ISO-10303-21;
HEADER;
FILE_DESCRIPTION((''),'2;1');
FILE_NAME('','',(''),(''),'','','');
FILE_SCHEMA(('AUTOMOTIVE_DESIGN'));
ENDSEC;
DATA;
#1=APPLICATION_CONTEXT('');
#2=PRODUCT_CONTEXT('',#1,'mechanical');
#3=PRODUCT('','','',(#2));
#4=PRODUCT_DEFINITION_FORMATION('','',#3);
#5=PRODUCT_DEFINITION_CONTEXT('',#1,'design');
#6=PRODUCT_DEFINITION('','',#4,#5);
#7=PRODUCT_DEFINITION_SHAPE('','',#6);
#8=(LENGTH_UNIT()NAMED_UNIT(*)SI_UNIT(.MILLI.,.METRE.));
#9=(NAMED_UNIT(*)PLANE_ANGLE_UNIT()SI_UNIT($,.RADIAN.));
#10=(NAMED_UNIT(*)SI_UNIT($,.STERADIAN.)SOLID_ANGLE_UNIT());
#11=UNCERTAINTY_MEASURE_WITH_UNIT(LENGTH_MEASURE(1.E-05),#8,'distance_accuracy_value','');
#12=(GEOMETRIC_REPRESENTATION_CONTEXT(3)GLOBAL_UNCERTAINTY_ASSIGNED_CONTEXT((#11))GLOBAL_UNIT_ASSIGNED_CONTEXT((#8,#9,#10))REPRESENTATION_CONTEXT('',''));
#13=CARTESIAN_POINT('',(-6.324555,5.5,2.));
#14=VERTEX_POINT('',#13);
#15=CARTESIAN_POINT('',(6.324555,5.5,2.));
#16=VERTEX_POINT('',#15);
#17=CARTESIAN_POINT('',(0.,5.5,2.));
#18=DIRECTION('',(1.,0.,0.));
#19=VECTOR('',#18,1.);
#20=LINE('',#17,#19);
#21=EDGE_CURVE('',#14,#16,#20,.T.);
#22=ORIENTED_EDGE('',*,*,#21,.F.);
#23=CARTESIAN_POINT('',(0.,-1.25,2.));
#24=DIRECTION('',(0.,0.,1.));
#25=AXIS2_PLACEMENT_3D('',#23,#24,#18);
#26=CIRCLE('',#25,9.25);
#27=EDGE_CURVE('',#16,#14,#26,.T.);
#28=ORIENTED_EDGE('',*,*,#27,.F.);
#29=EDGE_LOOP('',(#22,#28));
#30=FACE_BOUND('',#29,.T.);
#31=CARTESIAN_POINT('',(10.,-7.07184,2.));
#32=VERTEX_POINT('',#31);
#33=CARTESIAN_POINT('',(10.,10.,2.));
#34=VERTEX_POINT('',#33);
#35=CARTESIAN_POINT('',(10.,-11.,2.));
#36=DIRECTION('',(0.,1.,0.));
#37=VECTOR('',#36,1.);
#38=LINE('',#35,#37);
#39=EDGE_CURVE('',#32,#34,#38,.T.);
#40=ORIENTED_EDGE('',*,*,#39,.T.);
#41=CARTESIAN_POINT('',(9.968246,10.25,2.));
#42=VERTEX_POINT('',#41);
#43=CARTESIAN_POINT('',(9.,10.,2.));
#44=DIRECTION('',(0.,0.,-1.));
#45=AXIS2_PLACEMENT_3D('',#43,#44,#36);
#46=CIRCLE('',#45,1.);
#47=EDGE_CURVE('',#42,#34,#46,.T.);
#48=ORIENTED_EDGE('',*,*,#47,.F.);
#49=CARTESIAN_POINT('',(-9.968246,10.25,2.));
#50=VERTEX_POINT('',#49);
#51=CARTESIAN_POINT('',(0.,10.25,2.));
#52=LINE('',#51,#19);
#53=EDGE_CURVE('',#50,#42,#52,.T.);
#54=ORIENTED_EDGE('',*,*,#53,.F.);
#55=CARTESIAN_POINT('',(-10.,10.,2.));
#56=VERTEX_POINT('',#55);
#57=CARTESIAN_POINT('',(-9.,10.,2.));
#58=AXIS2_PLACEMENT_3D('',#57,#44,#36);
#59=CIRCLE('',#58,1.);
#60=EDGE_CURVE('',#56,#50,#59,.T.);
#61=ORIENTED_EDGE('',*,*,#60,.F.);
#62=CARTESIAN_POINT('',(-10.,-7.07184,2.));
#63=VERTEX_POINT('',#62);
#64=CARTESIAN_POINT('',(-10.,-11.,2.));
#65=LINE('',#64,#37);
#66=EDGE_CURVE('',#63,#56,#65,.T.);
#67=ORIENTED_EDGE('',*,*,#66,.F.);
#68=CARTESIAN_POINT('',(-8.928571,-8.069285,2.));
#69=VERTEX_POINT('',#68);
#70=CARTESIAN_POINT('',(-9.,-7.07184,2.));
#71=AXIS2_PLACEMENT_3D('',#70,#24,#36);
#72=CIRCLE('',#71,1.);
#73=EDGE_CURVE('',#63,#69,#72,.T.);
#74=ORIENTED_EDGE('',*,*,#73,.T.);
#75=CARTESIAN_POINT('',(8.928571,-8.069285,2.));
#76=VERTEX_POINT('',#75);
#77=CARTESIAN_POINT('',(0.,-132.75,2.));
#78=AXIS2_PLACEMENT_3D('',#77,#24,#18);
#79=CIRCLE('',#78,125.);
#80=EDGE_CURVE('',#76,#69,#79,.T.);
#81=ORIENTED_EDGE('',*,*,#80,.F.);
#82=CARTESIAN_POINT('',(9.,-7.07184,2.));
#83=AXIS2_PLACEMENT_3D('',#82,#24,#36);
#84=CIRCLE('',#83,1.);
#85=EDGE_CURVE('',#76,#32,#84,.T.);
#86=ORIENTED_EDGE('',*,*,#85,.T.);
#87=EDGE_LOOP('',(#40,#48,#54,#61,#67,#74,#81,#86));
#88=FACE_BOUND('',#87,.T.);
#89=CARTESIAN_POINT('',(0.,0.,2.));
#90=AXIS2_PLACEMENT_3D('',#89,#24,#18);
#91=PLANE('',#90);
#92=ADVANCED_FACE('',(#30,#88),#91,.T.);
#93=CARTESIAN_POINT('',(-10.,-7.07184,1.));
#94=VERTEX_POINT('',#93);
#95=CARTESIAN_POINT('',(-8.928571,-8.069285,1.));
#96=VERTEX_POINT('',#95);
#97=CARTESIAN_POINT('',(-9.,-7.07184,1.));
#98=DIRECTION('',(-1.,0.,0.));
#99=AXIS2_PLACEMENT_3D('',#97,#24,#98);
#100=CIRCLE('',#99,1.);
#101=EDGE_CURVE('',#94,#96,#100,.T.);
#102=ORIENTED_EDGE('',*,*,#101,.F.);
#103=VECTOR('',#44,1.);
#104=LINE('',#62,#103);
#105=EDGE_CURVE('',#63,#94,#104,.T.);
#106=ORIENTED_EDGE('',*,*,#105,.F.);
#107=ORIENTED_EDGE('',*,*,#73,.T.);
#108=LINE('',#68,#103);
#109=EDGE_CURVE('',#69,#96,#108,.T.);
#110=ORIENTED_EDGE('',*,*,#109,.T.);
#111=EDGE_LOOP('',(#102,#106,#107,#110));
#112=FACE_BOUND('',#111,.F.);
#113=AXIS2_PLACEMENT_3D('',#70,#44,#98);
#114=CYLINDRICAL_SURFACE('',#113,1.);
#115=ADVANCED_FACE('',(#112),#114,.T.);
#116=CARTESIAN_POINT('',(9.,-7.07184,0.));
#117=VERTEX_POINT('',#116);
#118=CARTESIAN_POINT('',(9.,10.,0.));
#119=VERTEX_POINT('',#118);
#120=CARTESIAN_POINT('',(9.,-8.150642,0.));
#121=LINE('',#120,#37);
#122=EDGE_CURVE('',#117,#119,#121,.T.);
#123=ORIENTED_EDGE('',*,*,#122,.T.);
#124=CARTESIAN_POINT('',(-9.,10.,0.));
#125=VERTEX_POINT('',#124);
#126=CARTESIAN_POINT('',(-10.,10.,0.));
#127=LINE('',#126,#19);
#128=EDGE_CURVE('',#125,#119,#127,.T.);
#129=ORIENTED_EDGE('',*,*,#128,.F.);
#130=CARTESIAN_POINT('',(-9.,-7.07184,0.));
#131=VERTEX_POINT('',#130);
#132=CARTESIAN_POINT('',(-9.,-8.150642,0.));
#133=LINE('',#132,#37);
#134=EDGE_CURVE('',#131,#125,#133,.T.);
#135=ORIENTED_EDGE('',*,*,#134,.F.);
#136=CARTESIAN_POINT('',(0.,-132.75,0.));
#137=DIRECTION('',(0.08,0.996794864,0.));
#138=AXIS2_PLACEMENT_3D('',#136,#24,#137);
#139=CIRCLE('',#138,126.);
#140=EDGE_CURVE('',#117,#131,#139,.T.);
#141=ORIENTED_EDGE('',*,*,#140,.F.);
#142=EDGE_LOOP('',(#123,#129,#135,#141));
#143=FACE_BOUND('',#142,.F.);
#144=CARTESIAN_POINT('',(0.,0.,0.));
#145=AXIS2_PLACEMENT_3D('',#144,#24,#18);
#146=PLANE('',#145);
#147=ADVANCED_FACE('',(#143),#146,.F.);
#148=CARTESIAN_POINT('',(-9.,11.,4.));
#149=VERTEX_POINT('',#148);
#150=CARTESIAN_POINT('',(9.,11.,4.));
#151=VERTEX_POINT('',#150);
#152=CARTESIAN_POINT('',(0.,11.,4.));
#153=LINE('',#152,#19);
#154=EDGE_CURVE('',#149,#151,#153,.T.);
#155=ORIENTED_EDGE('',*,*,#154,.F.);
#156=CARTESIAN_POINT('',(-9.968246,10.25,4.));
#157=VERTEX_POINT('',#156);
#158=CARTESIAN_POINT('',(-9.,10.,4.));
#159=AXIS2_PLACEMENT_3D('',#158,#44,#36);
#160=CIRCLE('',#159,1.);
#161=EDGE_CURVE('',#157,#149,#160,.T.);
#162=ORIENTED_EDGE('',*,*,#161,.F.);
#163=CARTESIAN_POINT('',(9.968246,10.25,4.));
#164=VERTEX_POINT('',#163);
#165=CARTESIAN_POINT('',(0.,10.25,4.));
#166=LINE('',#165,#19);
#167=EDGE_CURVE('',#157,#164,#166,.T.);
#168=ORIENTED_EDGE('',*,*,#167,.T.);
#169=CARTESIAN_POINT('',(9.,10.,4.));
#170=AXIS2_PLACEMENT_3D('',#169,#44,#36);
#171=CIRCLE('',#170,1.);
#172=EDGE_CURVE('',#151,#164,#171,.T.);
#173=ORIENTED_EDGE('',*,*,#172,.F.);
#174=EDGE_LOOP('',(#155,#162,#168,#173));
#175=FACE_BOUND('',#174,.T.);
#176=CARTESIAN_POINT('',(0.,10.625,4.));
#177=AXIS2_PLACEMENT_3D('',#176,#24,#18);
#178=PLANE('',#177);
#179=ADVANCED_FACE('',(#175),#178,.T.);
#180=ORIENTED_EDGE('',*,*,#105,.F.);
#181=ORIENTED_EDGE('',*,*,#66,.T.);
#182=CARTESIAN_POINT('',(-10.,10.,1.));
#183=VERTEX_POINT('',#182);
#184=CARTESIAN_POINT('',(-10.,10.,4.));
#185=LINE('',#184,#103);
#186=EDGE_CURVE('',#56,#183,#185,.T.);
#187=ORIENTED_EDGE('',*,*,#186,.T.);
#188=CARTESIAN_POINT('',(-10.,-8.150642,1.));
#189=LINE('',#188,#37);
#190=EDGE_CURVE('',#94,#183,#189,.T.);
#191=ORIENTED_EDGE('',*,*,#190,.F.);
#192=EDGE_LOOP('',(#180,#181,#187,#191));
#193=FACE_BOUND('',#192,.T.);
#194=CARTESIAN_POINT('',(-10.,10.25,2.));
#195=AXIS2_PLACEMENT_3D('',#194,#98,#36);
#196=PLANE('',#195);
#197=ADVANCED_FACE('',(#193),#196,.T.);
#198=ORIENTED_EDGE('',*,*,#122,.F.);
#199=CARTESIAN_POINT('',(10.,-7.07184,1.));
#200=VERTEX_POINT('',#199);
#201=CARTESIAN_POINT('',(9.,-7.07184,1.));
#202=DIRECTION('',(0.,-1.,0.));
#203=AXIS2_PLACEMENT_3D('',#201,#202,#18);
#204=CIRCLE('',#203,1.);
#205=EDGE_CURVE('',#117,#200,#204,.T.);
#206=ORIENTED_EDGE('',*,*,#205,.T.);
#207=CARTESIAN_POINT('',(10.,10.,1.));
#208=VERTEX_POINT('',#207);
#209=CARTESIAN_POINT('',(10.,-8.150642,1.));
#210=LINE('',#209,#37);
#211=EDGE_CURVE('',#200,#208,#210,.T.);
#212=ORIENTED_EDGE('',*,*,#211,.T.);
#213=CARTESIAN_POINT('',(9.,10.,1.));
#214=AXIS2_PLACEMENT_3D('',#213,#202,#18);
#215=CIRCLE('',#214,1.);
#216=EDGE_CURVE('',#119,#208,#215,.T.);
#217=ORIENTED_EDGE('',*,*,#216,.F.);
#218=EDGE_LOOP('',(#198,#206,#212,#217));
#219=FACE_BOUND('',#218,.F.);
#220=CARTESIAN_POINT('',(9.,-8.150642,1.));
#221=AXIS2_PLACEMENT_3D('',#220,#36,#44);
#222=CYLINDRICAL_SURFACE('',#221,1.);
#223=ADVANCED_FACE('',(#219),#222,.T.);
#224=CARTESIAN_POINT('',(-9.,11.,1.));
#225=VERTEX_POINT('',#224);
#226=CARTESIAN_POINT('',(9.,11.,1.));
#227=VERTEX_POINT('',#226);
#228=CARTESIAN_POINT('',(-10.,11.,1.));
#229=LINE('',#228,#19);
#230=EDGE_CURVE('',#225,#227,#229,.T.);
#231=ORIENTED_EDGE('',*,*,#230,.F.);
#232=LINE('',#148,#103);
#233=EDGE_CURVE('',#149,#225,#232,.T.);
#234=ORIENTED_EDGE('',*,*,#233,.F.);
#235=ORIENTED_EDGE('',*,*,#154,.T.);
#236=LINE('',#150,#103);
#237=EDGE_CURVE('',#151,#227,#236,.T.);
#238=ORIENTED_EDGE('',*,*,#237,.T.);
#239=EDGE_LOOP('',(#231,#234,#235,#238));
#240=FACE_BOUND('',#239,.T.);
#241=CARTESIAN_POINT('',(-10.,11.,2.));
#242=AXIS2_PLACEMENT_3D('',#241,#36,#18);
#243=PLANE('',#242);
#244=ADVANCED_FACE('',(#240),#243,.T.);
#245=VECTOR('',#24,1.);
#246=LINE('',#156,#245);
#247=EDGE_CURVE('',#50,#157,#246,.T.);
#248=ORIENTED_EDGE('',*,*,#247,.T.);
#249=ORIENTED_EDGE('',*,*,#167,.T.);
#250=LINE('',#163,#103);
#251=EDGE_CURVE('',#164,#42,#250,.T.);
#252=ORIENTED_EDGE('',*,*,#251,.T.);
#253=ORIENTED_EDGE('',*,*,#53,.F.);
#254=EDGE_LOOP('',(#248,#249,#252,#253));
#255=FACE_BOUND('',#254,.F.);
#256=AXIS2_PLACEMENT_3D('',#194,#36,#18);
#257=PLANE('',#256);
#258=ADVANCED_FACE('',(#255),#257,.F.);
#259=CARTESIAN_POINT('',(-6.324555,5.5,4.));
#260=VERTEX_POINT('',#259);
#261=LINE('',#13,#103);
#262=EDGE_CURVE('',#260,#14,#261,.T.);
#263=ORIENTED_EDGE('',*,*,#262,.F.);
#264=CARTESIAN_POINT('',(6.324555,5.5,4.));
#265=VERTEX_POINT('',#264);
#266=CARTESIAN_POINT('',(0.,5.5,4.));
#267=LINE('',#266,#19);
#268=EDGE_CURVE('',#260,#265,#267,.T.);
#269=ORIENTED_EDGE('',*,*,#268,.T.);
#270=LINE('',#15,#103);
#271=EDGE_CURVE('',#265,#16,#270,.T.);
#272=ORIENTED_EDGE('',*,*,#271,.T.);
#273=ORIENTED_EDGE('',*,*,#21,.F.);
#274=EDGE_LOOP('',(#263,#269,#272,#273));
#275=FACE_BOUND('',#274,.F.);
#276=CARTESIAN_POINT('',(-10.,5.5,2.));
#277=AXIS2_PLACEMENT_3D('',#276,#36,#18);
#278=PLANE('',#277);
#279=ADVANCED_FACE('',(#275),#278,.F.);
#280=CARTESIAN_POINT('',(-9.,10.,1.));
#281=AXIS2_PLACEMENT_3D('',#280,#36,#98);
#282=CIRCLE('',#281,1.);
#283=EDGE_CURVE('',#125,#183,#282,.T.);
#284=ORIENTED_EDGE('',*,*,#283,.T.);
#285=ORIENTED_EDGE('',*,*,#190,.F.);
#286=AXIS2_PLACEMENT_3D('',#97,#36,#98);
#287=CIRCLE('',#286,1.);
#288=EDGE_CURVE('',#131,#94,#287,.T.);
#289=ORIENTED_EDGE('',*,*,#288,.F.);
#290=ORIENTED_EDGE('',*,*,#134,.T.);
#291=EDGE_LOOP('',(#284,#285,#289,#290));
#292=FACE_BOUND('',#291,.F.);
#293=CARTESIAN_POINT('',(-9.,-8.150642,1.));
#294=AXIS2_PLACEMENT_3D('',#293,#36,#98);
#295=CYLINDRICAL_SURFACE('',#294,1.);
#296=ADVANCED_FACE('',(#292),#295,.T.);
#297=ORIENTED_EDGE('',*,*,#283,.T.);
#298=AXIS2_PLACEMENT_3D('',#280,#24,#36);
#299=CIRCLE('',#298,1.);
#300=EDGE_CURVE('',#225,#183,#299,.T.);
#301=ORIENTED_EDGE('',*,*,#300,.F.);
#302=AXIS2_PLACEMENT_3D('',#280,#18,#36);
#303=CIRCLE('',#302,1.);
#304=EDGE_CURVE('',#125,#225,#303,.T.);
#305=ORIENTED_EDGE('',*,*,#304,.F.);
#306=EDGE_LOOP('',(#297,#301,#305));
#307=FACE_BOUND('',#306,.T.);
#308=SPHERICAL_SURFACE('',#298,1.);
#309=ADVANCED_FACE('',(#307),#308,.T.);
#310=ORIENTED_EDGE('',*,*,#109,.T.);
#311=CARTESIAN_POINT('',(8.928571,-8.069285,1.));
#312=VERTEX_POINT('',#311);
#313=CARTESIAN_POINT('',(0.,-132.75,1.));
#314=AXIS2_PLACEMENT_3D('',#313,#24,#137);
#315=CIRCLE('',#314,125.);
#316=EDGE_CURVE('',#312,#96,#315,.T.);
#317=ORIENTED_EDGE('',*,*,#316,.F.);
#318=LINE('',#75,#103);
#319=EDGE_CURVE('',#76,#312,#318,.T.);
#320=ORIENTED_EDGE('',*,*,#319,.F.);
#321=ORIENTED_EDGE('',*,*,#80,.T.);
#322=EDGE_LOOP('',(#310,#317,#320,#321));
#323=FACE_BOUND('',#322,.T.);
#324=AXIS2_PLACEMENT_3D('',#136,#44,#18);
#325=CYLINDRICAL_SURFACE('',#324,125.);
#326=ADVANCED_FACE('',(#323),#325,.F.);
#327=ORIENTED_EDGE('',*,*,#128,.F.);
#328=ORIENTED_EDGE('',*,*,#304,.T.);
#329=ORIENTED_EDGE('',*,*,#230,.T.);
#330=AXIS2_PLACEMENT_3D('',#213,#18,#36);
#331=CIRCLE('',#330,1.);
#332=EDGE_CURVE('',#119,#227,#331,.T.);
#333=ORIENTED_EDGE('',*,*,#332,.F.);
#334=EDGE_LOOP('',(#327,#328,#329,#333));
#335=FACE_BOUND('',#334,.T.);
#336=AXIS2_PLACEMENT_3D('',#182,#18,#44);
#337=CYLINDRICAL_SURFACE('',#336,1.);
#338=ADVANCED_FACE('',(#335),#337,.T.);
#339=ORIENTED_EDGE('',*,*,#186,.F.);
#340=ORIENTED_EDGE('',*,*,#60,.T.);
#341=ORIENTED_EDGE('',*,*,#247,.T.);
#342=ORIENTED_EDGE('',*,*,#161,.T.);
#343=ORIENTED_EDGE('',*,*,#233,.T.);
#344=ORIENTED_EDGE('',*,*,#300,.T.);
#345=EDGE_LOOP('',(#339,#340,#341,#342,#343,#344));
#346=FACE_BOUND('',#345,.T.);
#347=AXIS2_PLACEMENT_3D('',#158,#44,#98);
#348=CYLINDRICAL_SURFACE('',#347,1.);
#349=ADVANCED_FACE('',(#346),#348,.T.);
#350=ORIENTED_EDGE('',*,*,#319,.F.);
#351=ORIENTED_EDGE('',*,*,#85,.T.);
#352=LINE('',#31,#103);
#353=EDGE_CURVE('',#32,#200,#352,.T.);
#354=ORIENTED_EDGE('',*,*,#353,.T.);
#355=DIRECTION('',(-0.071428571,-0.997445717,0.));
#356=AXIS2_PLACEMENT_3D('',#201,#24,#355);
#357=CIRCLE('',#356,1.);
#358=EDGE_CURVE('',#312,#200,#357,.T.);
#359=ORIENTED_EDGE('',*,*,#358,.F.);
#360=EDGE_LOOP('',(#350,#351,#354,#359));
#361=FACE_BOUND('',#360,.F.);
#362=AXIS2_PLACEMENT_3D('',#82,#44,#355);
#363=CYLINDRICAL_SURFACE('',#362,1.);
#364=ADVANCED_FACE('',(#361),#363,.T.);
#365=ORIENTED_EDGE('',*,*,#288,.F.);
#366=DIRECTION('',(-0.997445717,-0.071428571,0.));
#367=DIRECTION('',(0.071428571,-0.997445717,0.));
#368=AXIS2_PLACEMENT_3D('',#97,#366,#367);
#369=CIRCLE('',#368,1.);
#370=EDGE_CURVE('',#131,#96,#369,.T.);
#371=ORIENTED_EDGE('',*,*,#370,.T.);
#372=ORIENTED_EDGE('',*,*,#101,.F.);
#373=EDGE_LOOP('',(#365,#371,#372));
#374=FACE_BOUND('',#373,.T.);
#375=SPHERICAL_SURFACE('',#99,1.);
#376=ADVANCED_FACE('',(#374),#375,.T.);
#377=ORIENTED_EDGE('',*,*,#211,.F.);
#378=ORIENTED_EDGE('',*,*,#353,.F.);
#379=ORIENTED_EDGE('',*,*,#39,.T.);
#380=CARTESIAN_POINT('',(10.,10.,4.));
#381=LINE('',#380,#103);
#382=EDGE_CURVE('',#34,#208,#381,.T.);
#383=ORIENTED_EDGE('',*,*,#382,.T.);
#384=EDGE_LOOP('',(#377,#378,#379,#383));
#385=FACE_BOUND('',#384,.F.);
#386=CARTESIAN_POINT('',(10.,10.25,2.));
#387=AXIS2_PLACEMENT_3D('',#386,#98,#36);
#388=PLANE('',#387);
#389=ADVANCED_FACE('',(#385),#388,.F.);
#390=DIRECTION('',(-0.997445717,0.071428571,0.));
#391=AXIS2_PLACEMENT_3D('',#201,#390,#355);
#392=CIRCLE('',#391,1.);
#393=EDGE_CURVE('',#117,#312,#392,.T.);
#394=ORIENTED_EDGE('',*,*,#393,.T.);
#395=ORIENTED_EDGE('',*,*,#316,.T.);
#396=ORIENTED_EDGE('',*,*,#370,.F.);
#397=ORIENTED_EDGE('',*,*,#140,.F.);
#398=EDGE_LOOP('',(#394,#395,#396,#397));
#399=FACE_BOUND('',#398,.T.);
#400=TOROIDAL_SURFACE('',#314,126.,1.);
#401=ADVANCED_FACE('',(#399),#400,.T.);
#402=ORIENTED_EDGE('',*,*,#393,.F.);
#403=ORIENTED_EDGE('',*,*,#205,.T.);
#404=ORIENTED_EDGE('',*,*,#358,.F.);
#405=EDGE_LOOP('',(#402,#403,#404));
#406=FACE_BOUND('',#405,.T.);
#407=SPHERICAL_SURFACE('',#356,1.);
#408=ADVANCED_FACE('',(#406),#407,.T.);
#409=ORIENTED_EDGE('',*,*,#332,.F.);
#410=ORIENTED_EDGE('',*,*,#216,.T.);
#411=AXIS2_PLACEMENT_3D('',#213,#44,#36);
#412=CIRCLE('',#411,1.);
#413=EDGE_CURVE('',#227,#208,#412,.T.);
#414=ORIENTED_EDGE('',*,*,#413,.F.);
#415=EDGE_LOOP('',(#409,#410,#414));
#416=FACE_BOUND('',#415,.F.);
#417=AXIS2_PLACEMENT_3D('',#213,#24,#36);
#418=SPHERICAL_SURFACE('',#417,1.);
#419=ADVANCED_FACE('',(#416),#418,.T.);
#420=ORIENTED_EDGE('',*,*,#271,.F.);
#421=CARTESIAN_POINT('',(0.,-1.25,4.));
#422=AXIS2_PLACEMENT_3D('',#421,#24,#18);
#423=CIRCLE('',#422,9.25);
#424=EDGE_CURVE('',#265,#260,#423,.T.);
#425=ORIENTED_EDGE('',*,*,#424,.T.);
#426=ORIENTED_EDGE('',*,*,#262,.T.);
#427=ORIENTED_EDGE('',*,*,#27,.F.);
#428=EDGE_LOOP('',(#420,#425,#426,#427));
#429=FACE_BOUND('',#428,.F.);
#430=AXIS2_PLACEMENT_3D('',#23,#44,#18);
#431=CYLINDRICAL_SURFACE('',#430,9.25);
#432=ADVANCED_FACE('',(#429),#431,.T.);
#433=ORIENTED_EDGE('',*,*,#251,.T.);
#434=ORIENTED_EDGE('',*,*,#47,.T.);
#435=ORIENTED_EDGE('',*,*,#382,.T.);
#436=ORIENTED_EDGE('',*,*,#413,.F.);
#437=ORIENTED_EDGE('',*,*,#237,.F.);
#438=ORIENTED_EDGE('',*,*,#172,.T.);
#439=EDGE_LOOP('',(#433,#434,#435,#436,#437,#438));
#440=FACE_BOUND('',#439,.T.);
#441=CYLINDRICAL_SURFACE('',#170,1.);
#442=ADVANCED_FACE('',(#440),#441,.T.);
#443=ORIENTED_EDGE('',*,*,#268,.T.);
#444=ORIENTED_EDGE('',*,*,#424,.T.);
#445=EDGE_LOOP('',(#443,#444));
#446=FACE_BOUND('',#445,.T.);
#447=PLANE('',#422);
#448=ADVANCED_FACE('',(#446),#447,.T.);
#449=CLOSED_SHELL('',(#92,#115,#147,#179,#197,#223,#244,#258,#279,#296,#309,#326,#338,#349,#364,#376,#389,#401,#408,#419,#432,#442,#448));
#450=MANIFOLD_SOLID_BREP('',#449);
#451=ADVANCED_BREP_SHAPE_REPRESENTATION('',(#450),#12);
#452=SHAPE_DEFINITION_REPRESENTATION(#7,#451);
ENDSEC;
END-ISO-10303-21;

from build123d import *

# Parameters (mm, degrees)
F0_W     = 20
F0_H     = 22
F1_DEPTH = 2
F2_R     = 9.25
F4_DEPTH = 2
F3_W     = 20
F3_H     = 18
F5_DEPTH = 2
F6_W     = 20
F6_H     = 0.75
F7_DEPTH = 2
F8_R     = 125
F9_DEPTH = 2
F10_R    = 1


with BuildPart() as f1:
    # F0 (on Top) → F1 (new body)
    with BuildSketch(Plane.XY):
        Rectangle(F0_W, F0_H)
    extrude(amount=F1_DEPTH)

    # F2 (on face) → F4 (join)
    with BuildSketch(Plane.XY.offset(2)):
        with Locations((0, -1.25)):
            Circle(F2_R)
    extrude(amount=F4_DEPTH)

    # F3 (on face) → F5 (cut)
    with BuildSketch(Plane.XY.offset(2)):
        with Locations((0, -3.5)):
            Rectangle(F3_W, F3_H)
    extrude(amount=F5_DEPTH, mode=Mode.SUBTRACT)

    # F6 (on face) → F7 (join)
    with BuildSketch(Plane.XY.offset(2)):
        with Locations((0, 10.625)):
            Rectangle(F6_W, F6_H)
    extrude(amount=F7_DEPTH)

    # F8 (on Top) → F9 (cut)
    with BuildSketch(Plane.XY):
        with Locations((0, -132.75)):
            Circle(F8_R)
    extrude(amount=F9_DEPTH, mode=Mode.SUBTRACT)

    # F10
    f10_edges = [f1.edges().sort_by_distance(p)[0] for p in [
        (10, -8.150642, 1),
        (-10, -8.150642, 1),
        (10, 11, 2),
        (-10, 11, 2),
        (0, 11, 0),
        (-10, 1.424679, 0),
        (0, -7.75, 0),
        (10, 1.424679, 0),
    ]]
    fillet(f10_edges, radius=F10_R)


solid = f1.part
